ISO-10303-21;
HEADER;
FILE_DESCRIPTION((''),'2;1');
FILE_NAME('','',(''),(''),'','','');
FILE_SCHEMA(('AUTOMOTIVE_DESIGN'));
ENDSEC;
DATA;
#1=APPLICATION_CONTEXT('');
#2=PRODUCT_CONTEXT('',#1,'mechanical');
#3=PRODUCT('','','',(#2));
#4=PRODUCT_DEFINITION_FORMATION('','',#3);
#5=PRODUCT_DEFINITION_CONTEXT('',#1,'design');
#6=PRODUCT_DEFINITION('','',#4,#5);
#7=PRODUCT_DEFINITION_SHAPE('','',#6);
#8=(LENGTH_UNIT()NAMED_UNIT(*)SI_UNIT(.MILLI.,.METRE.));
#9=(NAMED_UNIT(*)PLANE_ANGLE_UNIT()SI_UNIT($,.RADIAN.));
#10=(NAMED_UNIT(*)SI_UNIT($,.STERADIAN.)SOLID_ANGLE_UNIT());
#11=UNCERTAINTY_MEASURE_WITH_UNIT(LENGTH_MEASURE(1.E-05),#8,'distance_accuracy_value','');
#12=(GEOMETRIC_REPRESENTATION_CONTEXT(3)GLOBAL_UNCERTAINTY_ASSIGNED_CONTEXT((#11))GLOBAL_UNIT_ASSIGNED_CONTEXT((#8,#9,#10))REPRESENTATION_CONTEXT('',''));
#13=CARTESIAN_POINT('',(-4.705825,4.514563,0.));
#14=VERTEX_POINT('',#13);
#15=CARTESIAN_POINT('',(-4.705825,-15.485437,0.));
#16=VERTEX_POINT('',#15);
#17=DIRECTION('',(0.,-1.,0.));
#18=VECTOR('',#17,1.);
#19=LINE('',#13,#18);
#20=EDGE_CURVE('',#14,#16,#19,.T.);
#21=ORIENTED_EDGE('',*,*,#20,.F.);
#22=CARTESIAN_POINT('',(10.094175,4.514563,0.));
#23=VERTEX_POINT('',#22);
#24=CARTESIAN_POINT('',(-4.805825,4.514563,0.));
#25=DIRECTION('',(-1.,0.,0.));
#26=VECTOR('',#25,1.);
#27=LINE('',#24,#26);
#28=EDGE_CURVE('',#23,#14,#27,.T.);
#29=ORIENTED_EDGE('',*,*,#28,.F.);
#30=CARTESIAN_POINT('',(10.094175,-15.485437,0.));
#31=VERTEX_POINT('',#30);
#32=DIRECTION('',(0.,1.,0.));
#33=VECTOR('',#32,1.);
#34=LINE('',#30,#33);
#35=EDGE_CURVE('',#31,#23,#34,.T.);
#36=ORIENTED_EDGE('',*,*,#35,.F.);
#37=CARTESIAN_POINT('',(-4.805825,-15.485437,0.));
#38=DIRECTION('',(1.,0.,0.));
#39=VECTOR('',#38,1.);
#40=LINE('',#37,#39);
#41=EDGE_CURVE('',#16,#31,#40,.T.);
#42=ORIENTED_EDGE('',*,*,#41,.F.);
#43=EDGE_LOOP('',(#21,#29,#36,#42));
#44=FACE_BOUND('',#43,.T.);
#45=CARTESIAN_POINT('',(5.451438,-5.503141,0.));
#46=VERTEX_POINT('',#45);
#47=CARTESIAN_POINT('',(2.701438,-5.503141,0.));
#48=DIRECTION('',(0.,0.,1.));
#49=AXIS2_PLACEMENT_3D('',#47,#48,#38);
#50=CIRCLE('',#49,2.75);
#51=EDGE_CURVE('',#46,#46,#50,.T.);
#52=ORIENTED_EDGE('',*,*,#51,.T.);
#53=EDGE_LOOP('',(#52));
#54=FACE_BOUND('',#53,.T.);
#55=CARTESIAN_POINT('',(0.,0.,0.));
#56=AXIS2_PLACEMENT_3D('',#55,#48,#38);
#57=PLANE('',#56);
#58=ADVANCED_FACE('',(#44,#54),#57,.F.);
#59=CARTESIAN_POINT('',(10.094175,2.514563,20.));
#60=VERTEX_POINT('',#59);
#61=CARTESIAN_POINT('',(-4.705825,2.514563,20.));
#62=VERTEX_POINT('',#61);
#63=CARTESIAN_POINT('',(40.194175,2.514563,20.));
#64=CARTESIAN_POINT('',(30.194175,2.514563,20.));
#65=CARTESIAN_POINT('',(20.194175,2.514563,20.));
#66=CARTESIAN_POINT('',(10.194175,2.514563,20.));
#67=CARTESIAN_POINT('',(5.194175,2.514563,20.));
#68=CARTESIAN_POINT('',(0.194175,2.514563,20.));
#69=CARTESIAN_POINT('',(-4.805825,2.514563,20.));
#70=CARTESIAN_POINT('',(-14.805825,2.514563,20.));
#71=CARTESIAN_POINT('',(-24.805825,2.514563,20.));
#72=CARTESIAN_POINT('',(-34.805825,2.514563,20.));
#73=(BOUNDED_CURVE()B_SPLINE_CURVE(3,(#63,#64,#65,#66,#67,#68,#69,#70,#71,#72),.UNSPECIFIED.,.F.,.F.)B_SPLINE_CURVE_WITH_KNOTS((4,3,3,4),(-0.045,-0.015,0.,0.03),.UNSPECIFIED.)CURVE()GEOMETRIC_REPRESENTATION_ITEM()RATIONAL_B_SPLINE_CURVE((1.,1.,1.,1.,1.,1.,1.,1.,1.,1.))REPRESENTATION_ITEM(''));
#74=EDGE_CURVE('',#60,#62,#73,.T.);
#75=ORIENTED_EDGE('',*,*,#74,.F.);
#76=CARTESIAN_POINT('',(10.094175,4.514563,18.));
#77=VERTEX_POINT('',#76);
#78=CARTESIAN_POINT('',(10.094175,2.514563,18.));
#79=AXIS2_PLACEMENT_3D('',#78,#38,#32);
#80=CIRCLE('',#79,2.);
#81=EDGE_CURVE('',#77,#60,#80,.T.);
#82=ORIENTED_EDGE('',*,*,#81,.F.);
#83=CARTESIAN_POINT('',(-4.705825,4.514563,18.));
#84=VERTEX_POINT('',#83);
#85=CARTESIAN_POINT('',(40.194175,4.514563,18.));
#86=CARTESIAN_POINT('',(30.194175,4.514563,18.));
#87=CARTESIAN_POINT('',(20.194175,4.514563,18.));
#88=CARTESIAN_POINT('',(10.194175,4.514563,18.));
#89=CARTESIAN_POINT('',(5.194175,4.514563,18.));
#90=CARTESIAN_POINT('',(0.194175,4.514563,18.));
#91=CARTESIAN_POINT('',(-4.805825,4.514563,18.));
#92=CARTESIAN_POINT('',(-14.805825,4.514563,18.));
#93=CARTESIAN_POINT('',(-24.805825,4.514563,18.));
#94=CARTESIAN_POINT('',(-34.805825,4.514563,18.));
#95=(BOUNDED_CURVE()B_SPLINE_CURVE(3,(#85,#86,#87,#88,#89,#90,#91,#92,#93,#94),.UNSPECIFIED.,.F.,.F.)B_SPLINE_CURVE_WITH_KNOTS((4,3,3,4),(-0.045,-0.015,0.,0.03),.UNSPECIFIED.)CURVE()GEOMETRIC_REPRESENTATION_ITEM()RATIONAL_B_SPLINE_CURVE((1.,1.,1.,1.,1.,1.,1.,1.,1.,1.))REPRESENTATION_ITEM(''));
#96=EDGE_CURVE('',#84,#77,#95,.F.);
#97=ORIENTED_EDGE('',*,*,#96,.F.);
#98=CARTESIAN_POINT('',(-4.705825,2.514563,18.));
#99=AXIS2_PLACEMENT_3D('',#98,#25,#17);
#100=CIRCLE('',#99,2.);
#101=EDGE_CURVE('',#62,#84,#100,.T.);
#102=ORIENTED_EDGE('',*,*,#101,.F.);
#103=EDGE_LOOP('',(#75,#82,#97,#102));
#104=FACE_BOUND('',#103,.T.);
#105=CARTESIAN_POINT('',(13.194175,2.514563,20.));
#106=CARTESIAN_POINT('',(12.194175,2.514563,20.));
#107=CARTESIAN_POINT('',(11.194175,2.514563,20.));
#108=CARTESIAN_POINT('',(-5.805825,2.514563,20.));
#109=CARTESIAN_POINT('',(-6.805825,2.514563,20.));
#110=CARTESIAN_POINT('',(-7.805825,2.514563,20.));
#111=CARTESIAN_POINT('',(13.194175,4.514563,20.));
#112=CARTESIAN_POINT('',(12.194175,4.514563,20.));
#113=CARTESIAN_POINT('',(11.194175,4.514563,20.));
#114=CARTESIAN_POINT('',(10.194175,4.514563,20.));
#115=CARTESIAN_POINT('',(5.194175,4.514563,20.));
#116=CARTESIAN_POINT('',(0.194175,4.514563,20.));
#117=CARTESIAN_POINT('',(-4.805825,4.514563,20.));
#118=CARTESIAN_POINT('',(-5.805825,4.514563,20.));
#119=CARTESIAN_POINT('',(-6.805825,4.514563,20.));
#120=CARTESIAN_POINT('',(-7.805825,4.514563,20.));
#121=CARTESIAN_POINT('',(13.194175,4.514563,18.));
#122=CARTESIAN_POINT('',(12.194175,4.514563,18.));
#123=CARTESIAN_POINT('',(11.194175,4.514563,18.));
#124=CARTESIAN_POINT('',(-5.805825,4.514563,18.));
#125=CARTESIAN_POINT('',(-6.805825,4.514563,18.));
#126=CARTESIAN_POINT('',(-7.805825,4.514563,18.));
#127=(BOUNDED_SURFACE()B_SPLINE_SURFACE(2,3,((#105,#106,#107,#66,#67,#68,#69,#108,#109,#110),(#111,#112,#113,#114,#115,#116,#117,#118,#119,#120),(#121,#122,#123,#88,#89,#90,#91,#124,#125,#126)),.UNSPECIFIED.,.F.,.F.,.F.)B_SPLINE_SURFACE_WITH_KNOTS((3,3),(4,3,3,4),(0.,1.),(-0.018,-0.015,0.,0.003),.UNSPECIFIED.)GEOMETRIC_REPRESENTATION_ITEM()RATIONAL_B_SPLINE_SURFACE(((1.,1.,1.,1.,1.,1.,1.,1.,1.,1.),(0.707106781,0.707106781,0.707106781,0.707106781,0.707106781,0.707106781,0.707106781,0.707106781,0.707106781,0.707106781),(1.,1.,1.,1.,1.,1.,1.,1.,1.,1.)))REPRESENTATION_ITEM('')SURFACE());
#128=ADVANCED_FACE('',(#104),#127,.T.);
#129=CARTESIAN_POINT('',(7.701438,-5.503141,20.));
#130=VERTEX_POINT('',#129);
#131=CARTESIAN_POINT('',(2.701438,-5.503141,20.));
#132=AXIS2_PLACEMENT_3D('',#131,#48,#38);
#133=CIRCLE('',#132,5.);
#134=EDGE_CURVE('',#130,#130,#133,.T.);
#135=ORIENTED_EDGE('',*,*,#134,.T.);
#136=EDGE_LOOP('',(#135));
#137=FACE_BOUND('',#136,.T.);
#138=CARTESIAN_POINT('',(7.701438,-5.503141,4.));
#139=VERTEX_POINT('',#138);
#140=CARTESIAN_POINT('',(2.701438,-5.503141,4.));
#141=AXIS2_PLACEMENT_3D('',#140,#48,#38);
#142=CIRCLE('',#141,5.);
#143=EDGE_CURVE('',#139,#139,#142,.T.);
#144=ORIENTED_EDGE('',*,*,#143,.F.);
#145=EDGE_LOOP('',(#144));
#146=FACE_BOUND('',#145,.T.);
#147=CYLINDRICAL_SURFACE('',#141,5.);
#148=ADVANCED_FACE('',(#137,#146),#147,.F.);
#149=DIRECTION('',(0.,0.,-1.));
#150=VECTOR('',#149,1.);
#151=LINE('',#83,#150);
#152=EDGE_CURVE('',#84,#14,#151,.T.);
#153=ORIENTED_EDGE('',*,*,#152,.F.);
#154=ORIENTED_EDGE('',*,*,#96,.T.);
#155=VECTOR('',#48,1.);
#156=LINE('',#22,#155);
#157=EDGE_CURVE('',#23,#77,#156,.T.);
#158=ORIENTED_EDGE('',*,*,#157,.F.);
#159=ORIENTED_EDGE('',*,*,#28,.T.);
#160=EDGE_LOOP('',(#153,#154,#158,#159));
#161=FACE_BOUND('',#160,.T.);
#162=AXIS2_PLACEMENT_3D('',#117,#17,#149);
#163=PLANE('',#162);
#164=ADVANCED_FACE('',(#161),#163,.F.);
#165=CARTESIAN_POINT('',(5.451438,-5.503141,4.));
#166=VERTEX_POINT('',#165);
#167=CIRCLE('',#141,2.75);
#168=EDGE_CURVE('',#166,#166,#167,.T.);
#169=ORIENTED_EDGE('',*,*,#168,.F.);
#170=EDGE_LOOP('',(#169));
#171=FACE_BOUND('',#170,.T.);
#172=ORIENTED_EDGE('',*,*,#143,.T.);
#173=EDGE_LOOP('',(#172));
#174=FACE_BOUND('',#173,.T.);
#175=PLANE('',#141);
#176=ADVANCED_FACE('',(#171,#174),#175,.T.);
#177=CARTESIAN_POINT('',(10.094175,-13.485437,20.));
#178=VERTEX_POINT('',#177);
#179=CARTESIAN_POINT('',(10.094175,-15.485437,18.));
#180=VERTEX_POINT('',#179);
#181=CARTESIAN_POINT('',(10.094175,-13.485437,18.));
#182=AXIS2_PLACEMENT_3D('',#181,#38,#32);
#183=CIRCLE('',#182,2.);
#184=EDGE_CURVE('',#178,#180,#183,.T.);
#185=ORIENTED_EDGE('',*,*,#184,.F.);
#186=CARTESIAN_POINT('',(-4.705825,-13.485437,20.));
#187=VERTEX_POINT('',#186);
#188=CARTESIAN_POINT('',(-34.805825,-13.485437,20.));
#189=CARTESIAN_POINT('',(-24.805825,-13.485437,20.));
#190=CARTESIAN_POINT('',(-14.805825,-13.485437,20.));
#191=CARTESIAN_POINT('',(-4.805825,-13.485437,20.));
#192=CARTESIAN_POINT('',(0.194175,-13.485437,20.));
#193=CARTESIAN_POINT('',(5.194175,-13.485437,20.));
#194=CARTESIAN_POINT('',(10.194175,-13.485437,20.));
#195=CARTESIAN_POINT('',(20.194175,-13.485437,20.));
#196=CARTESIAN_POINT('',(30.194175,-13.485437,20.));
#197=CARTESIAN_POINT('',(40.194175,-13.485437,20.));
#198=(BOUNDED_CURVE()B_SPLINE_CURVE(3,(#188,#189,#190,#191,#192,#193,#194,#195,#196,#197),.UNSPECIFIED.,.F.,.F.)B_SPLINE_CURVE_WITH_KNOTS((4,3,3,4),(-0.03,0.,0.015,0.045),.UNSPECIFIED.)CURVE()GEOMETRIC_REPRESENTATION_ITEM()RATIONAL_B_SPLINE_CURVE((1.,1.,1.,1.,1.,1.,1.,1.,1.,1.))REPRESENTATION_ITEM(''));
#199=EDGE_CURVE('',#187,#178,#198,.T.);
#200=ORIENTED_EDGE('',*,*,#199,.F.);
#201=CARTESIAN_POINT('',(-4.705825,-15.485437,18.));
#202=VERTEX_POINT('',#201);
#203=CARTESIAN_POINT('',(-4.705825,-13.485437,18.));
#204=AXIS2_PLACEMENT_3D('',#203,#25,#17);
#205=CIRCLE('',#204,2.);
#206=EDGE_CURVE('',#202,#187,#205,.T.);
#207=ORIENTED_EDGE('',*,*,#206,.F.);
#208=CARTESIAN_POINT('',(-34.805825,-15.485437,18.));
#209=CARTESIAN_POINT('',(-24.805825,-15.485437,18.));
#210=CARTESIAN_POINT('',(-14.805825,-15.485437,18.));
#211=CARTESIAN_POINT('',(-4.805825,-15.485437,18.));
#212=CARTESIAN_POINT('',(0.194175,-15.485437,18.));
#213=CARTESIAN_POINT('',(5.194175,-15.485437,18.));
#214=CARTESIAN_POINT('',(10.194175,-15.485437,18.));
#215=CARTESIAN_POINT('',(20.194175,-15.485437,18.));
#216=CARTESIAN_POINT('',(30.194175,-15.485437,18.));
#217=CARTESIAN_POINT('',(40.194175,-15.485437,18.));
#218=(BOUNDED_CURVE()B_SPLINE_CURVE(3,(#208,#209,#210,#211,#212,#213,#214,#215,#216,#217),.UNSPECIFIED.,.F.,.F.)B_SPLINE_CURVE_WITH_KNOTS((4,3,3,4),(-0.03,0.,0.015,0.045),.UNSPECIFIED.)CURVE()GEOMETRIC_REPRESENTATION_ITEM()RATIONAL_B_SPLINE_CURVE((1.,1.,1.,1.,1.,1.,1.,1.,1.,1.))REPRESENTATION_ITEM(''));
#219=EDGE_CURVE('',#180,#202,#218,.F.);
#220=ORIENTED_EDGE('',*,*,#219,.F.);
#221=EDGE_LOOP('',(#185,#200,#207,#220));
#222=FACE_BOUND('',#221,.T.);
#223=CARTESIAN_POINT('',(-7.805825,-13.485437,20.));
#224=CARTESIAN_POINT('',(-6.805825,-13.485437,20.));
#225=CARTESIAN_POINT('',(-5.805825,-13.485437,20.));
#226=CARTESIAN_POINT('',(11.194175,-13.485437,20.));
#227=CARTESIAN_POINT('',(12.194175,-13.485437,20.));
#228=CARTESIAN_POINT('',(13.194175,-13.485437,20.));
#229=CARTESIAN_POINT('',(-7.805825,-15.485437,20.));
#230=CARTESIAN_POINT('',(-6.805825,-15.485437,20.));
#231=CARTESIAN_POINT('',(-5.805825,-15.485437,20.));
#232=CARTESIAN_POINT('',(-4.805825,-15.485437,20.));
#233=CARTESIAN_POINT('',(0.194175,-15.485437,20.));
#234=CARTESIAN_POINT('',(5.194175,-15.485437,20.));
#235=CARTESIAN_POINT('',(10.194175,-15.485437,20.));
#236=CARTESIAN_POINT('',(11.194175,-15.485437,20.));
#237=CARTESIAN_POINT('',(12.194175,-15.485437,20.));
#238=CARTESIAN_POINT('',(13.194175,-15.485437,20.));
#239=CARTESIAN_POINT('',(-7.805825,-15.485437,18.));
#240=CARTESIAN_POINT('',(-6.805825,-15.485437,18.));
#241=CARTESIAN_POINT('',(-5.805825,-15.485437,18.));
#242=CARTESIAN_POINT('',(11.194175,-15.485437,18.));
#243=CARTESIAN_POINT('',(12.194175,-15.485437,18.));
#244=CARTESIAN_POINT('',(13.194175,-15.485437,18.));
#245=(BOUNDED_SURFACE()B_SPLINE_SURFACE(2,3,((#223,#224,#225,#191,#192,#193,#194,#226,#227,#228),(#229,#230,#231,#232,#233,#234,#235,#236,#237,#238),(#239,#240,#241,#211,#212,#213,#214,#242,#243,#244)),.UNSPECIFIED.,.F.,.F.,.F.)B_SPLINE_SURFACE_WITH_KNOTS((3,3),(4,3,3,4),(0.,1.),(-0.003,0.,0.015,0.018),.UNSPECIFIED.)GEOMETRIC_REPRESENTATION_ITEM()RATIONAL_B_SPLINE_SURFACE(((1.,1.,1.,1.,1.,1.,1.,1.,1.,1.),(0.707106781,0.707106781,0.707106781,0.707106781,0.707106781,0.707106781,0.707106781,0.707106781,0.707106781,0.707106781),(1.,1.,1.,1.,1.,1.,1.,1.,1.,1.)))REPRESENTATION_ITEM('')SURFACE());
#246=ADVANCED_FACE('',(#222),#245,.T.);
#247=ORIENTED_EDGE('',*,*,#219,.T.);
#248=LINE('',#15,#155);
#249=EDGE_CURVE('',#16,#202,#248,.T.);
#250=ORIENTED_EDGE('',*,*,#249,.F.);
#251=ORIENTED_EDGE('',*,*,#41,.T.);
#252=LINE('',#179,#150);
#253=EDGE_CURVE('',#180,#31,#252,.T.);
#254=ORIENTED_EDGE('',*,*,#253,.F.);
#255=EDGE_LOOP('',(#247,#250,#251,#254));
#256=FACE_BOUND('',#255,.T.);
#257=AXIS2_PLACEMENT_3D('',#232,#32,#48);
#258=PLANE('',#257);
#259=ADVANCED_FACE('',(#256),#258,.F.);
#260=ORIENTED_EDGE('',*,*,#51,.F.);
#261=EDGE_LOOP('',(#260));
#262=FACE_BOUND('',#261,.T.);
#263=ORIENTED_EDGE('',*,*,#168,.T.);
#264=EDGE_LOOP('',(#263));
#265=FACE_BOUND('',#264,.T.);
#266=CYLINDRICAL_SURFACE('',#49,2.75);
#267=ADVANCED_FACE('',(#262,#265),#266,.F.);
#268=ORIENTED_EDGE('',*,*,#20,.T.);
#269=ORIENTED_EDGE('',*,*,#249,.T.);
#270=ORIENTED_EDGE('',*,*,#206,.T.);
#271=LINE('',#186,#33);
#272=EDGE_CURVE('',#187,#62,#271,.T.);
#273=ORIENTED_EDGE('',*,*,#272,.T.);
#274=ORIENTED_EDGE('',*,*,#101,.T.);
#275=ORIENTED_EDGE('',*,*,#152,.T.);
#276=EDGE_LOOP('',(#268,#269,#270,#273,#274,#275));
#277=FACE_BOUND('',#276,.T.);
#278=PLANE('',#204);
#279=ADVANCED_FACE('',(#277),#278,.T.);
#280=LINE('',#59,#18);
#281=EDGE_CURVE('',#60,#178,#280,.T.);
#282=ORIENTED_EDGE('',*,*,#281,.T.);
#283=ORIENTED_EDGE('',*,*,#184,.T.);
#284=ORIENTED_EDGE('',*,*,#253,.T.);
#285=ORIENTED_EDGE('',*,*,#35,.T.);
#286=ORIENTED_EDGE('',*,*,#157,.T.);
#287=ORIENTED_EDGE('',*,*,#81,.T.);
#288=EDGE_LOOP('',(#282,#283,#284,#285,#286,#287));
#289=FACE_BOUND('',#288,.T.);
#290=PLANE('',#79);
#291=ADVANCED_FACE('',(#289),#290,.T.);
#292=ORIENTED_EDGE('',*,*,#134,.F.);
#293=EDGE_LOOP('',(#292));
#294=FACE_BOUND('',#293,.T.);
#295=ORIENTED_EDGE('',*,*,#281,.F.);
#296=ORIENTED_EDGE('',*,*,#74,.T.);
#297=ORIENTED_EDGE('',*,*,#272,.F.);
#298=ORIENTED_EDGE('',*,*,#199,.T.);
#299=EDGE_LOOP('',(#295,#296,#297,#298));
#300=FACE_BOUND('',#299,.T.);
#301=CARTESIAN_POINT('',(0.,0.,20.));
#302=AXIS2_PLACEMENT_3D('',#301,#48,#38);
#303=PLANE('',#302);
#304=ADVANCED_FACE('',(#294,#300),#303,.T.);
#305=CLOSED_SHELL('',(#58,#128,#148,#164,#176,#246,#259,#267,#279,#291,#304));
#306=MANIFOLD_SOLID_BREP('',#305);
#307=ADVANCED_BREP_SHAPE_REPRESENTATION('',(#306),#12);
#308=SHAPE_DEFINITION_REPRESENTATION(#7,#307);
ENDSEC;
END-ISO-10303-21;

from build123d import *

# Parameters (mm, degrees)
SKETCH_1_W          = 15
SKETCH_1_H          = 20
EXTRUDE_1_DEPTH     = 20
SKETCH_5_R          = 5
SKETCH_5_R_2        = 2.75
CUT_EXTRUDE_1_DEPTH = 16
SKETCH_6_R          = 2.75
CUT_EXTRUDE_2_DEPTH = 28.271229432
FILLET_2_R          = 2
CUT_EXTRUDE_4_DEPTH = 0.1
CUT_EXTRUDE_5_DEPTH = 0.1


with BuildPart() as part:
    # 草图1 → 凸台-拉伸1 (new body)
    with BuildSketch(Plane.XY):
        with Locations((2.694174757, -5.485436893)):
            Rectangle(SKETCH_1_W, SKETCH_1_H)
    extrude(amount=EXTRUDE_1_DEPTH)

    # 草图5 → 切除-拉伸1 (cut)
    with BuildSketch(Plane.XY.offset(20)):
        with Locations((2.701438281, -5.503140696)):
            Circle(SKETCH_5_R)
        with Locations((2.701438281, -5.503140696)):
            Circle(SKETCH_5_R_2, mode=Mode.SUBTRACT)
    extrude(amount=-CUT_EXTRUDE_1_DEPTH, mode=Mode.SUBTRACT)

    # 草图6 → 切除-拉伸2 (cut, through all)
    with BuildSketch(Plane.XY.offset(20)):
        with Locations((2.701438281, -5.503140696)):
            Circle(SKETCH_6_R)
    extrude(amount=-CUT_EXTRUDE_2_DEPTH, mode=Mode.SUBTRACT)

    # 变化圆角2
    fillet_2_edges = [part.edges().sort_by_distance(p)[0] for p in [
        (2.694174757, -15.485436893, 20),
        (2.694174757, 4.514563107, 20),
    ]]
    fillet(fillet_2_edges, radius=FILLET_2_R)

    # 草图7 → 切除-拉伸4 (cut)
    with BuildSketch(Plane.ZY.offset(4.805825243)):
        with BuildLine():
            Line((0, -15.485436893), (18, -15.485436893))
            ThreePointArc((18, -15.485436893), (19.414213562, -14.899650456), (20, -13.485436893))
            Line((20, -13.485436893), (20, 2.514563107))
            ThreePointArc((20, 2.514563107), (19.414213562, 3.928776669), (18, 4.514563107))
            Line((18, 4.514563107), (0, 4.514563107))
            Line((0, 4.514563107), (0, -15.485436893))
        make_face()
    extrude(amount=-CUT_EXTRUDE_4_DEPTH, mode=Mode.SUBTRACT)

    # 草图8 → 切除-拉伸5 (cut)
    with BuildSketch(Plane(origin=(10.194174757, 0, 0), x_dir=(0, 0, -1), z_dir=(1, 0, 0))):
        with BuildLine():
            Line((-20, 2.514563107), (-20, -13.485436893))
            ThreePointArc((-20, -13.485436893), (-19.414213562, -14.899650456), (-18, -15.485436893))
            Line((-18, -15.485436893), (0, -15.485436893))
            Line((0, -15.485436893), (0, 4.514563107))
            Line((0, 4.514563107), (-18, 4.514563107))
            ThreePointArc((-18, 4.514563107), (-19.414213562, 3.928776669), (-20, 2.514563107))
        make_face()
    extrude(amount=-CUT_EXTRUDE_5_DEPTH, mode=Mode.SUBTRACT)


solid = part.part
